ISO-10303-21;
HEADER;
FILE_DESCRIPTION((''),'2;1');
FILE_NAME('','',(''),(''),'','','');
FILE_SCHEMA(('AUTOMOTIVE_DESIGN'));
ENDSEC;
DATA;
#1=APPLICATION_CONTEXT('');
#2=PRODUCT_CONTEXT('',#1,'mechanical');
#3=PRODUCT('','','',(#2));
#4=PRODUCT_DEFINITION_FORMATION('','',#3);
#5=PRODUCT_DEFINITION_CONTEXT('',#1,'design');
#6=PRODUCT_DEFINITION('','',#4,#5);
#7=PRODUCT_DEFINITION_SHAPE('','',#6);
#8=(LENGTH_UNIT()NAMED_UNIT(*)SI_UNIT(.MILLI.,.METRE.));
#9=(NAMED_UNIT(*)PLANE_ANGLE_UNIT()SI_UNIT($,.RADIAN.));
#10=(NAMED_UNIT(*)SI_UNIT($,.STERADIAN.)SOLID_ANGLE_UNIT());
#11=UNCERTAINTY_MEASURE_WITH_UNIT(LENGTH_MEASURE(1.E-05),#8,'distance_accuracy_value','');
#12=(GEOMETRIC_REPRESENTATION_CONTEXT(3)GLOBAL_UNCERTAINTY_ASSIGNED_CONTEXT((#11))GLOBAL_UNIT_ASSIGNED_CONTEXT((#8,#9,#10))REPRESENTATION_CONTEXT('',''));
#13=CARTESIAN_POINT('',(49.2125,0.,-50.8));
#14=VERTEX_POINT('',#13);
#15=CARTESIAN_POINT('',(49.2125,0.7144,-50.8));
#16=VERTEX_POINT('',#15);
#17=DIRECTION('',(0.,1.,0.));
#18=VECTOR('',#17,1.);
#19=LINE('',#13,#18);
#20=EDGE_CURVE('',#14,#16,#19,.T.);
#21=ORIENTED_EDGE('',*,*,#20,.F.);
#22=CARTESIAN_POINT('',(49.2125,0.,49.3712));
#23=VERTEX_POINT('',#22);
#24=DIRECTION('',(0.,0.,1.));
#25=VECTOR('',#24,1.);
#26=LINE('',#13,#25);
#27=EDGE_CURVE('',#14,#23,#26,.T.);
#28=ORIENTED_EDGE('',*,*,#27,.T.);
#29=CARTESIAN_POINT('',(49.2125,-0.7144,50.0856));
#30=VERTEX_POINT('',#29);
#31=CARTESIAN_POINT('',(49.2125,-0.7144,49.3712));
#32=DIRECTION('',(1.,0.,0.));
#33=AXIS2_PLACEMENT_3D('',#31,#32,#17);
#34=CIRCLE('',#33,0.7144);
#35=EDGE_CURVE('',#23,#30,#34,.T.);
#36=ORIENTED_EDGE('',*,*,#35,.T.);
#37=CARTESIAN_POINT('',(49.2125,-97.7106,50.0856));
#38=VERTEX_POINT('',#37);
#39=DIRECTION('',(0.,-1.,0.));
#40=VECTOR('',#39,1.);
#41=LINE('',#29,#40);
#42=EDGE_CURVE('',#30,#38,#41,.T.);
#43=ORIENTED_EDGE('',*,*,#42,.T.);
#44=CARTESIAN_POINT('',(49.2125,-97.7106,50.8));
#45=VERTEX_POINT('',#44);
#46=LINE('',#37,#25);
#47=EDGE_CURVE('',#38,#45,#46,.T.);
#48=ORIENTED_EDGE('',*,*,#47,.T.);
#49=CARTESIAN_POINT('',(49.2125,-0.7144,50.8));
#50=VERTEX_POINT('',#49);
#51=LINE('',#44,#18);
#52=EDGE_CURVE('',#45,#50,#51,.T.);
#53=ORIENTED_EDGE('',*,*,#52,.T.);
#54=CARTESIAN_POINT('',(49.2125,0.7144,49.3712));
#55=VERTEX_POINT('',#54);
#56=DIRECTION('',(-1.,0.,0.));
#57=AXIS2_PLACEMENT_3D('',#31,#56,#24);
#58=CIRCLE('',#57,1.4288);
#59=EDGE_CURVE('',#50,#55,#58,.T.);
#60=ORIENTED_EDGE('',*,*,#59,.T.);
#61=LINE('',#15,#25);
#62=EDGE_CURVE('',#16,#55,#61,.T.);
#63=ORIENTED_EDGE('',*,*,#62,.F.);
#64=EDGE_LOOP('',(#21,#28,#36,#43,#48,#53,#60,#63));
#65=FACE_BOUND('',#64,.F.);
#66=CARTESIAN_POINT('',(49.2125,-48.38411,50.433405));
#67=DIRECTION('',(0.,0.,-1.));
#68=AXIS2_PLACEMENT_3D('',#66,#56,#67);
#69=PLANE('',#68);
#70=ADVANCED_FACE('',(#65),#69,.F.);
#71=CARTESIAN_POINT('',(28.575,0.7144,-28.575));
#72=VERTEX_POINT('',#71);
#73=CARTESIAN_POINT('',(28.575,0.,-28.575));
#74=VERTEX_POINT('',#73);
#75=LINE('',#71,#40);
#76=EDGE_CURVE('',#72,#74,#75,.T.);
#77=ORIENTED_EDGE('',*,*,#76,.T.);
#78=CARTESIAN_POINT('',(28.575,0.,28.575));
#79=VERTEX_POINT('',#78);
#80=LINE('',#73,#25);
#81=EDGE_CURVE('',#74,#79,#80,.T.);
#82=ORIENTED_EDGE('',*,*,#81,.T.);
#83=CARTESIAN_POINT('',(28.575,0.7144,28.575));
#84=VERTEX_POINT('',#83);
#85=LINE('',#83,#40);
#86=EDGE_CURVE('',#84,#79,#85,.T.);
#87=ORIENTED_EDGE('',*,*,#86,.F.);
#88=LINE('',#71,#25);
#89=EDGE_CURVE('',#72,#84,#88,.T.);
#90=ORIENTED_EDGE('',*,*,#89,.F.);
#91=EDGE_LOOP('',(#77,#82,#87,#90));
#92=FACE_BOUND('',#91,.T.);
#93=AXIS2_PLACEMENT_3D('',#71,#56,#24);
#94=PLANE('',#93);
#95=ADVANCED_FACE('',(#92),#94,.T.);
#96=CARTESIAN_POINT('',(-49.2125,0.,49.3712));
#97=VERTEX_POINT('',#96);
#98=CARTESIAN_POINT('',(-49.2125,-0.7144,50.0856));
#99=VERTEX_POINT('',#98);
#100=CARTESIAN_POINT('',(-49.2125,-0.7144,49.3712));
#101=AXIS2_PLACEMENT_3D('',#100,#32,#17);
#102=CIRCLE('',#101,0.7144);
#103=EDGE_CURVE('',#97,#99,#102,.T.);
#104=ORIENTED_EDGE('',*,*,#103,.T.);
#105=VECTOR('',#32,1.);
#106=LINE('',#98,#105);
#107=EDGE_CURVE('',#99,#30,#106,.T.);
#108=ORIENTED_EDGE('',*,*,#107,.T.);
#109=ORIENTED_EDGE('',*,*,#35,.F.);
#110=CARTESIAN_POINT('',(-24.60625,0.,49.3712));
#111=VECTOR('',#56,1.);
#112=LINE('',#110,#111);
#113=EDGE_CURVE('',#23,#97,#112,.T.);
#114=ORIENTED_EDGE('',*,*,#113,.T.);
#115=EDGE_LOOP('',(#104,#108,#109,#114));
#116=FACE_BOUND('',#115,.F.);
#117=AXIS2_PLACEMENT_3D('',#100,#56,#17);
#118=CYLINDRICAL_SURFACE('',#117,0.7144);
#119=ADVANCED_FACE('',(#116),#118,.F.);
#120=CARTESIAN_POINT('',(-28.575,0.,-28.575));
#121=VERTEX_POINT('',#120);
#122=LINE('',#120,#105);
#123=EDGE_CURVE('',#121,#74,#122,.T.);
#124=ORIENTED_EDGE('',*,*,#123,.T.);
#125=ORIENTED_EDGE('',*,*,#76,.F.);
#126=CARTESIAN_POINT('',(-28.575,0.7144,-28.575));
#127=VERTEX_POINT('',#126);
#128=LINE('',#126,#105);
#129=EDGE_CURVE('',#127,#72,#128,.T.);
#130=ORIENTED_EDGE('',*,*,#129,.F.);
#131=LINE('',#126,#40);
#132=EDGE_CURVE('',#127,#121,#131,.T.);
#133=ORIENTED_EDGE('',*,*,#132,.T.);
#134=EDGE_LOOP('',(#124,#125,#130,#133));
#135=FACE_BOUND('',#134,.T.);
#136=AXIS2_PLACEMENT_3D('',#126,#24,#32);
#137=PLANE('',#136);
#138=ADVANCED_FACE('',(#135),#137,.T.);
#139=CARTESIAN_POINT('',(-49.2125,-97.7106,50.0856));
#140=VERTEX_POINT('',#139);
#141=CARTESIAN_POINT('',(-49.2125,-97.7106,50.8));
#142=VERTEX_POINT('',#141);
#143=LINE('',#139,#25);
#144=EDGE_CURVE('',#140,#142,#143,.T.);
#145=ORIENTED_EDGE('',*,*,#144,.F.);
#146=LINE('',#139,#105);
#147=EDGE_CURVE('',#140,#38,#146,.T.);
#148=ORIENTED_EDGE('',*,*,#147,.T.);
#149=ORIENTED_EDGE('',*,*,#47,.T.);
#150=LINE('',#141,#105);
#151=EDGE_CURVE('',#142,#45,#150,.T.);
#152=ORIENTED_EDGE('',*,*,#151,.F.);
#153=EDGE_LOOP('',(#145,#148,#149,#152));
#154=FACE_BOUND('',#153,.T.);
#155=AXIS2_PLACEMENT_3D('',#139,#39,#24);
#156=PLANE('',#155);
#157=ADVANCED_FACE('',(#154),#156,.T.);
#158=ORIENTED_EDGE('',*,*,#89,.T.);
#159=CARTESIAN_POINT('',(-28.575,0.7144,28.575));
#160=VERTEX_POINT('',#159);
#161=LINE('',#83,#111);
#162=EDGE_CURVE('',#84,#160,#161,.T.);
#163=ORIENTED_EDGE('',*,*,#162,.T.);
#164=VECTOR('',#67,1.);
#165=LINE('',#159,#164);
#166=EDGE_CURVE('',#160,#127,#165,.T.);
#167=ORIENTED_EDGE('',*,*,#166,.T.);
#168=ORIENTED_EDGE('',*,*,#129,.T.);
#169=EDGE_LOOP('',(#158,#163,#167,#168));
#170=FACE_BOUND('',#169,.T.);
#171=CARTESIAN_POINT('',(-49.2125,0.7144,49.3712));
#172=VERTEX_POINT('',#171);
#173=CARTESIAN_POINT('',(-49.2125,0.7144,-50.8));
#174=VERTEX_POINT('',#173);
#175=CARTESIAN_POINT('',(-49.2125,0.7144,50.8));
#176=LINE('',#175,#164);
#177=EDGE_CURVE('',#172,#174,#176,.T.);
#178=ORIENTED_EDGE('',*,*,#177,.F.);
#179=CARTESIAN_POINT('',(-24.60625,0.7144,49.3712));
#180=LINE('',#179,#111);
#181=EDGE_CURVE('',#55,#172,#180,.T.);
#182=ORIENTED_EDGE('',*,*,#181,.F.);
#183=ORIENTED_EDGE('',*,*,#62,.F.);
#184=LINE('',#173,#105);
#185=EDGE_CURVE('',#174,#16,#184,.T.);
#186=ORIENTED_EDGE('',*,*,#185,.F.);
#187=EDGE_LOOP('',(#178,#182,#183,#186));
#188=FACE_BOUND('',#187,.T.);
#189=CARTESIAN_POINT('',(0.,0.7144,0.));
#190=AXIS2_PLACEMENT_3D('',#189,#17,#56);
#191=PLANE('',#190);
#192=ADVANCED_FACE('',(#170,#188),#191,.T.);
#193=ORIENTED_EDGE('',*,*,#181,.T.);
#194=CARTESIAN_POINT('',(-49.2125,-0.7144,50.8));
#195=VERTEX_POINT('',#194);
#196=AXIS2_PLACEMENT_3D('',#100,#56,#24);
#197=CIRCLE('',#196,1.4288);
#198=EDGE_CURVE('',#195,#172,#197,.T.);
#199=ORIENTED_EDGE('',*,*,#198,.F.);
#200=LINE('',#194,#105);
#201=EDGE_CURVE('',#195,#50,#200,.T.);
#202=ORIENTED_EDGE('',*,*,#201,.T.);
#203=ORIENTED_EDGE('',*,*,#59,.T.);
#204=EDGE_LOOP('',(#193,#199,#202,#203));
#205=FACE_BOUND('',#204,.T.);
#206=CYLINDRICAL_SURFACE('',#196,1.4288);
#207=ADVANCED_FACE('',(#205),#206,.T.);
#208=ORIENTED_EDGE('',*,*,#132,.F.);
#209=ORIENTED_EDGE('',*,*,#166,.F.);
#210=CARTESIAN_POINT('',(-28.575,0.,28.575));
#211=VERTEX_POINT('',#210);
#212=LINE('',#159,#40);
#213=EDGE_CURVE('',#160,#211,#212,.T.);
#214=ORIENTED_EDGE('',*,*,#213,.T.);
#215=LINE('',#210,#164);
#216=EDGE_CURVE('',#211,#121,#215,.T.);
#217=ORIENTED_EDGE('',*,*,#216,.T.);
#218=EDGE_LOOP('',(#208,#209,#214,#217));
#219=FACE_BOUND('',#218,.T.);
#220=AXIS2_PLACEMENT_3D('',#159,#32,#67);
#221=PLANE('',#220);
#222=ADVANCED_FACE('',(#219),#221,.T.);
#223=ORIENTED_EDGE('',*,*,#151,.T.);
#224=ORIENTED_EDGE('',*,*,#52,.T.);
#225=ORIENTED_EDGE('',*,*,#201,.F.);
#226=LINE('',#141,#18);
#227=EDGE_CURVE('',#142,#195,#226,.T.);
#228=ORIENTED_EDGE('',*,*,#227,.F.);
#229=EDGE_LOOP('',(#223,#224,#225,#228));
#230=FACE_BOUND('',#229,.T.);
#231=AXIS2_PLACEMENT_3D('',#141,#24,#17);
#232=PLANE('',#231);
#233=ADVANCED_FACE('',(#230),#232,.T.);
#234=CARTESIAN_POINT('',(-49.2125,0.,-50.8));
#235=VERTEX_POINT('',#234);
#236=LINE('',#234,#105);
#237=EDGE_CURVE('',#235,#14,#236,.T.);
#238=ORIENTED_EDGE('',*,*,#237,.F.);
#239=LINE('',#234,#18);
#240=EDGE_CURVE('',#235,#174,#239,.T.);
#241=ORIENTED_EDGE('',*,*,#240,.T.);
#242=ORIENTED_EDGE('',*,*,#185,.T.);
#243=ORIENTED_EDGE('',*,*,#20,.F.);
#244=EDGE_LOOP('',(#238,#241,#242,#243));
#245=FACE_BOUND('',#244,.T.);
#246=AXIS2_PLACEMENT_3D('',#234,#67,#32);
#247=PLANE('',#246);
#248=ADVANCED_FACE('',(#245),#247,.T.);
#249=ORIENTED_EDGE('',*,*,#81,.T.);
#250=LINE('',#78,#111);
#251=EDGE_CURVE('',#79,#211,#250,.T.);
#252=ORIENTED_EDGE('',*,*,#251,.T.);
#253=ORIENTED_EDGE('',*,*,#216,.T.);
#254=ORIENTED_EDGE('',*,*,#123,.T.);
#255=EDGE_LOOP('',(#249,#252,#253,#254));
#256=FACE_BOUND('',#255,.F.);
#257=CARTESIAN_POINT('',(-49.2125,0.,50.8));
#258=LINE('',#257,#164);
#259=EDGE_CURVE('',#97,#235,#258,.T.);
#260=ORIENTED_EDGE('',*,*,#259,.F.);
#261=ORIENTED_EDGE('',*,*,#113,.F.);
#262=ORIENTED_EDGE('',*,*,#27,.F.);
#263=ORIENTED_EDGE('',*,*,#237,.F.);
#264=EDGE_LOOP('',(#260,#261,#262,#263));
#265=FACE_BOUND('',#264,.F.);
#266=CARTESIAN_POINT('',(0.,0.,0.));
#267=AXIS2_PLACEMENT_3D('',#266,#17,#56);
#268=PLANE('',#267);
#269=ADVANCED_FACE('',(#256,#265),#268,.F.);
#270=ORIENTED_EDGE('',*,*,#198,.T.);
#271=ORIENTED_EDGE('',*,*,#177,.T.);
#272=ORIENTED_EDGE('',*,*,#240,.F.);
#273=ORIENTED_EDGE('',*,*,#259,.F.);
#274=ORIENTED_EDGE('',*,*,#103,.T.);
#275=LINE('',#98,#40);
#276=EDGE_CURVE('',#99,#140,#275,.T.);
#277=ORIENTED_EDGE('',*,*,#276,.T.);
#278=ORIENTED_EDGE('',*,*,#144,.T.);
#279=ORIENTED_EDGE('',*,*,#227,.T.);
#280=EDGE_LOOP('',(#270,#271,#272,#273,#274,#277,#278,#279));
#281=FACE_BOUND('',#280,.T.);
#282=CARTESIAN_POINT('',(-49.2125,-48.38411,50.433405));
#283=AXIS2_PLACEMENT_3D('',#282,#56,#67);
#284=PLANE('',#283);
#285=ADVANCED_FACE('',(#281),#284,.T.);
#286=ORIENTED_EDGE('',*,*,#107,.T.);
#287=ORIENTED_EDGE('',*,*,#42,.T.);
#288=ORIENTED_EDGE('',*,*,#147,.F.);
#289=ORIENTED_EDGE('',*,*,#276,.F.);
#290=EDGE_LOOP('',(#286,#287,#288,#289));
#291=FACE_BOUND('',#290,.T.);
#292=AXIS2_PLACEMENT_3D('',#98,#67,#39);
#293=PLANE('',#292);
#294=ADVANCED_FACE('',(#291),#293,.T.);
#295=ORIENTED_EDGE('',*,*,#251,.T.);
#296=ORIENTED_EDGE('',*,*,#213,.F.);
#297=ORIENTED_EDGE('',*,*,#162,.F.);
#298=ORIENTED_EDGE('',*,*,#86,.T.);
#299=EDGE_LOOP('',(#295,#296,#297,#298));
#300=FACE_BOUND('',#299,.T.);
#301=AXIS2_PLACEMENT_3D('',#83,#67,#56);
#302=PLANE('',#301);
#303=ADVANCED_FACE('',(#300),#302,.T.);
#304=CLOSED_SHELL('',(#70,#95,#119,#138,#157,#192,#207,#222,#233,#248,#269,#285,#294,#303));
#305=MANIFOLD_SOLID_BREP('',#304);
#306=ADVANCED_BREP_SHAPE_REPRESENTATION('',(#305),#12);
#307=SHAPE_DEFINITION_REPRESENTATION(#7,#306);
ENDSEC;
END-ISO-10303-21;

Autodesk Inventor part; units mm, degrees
ref_plane "YZ Plane" through (0, 0, 0) normal (1, 0, 0) x (0, 1, 0)
ref_plane "XZ Plane" through (0, 0, 0) normal (0, 1, 0) x (-1, 0, 0)
ref_plane "XY Plane" through (0, 0, 0) normal (0, 0, 1) x (1, 0, 0)
sketch "Sketch1" plane through (0, 0, 0) normal (0, 1, 0) x (-1, 0, 0)
  line L0 (-49.2125, 50.8) -> (49.2125, 50.8)
  line L1 (49.2125, 50.8) -> (49.2125, -50.8)
  line L2 (49.2125, -50.8) -> (-49.2125, -50.8)
  line L3 (-49.2125, -50.8) -> (-49.2125, 50.8)
  line L4 (-49.2125, 50.8) -> (49.2125, -50.8) construction
  line L5 (49.2125, 50.8) -> (-49.2125, -50.8) construction
  point P0 (0, 0)
  dimension "d0" = 98.425
  dimension "d1" = 101.6
extrude "Plate1" add sketch "Sketch1" along normal blind 0.7144
sketch "Sketch2" plane through (-49.2125, 0.7144, 50.0856) normal (0, 0, 1) x (1, 0, 0)
  line L0 (98.425, 0) -> (0, 0)
  line L1 (0, 0) -> (0, -98.425)
  line L2 (0, -98.425) -> (98.425, -98.425)
  line L3 (98.425, -98.425) -> (98.425, 0)
edge flange "Flange1" height 98.425 angle 90 thickness 0.7144 bend radius 0.7144 thickness toward (0, 0, 1) relief tear relief width 0.7144 relief depth 0.3572 edges at (0, 0, 50.8) wall of the first edge with corners at (49.2125, 0.7144, 50.0856) (-49.2125, 0.7144, 50.0856) (-49.2125, -97.7106, 50.0856) (49.2125, -97.7106, 50.0856)
bend "Bend1"
corner "Corner1"
sketch "Sketch3" plane through (0, 0.7144, 0) normal (0, 1, 0) x (1, 0, 0)
  line L0 (28.575, -28.575) -> (-28.575, -28.575)
  line L1 (-28.575, -28.575) -> (-28.575, 28.575)
  line L2 (-28.575, 28.575) -> (28.575, 28.575)
  line L3 (28.575, 28.575) -> (28.575, -28.575)
  line L4 (28.575, -28.575) -> (-28.575, 28.575) construction
  line L5 (-28.575, -28.575) -> (28.575, 28.575) construction
  point P0 (0, 0)
  dimension "d13" = 57.15
  dimension "d14" = 57.15
extrude "Extrusion1" cut sketch "Sketch3" against normal blind 0.7144
equation "\"d15\" = Thickness"
equation "\"d2\" = Thickness"
equation "\"d3\" = BendReliefWidth"
equation "\"d4\" = BendReliefDepth"
equation "\"d5\" = MinimumRemnant"
equation "\"d6\" = TransitionRadius"
equation "\"d9\" = BendRadius"
equation "\"d10\" = CornerReliefSize"
equation "\"d11\" = GapSize"
equation "\"d12\" = JacobiRadiusSize"
equation "\"BendRadius\" = Thickness"
equation "\"BendReliefWidth\" = Thickness"
equation "\"BendReliefDepth\" = 0.5 * Thickness"
equation "\"CornerReliefSize\" = 4 * Thickness"
equation "\"MinimumRemnant\" = 2 * Thickness"
equation "\"TransitionRadius\" = BendRadius"
equation "\"JacobiRadiusSize\" = BendRadius"
equation "\"GapSize\" = Thickness"
equation "\"Thickness\" = 0.714375"
properties part number "sheet metal cap stone"
